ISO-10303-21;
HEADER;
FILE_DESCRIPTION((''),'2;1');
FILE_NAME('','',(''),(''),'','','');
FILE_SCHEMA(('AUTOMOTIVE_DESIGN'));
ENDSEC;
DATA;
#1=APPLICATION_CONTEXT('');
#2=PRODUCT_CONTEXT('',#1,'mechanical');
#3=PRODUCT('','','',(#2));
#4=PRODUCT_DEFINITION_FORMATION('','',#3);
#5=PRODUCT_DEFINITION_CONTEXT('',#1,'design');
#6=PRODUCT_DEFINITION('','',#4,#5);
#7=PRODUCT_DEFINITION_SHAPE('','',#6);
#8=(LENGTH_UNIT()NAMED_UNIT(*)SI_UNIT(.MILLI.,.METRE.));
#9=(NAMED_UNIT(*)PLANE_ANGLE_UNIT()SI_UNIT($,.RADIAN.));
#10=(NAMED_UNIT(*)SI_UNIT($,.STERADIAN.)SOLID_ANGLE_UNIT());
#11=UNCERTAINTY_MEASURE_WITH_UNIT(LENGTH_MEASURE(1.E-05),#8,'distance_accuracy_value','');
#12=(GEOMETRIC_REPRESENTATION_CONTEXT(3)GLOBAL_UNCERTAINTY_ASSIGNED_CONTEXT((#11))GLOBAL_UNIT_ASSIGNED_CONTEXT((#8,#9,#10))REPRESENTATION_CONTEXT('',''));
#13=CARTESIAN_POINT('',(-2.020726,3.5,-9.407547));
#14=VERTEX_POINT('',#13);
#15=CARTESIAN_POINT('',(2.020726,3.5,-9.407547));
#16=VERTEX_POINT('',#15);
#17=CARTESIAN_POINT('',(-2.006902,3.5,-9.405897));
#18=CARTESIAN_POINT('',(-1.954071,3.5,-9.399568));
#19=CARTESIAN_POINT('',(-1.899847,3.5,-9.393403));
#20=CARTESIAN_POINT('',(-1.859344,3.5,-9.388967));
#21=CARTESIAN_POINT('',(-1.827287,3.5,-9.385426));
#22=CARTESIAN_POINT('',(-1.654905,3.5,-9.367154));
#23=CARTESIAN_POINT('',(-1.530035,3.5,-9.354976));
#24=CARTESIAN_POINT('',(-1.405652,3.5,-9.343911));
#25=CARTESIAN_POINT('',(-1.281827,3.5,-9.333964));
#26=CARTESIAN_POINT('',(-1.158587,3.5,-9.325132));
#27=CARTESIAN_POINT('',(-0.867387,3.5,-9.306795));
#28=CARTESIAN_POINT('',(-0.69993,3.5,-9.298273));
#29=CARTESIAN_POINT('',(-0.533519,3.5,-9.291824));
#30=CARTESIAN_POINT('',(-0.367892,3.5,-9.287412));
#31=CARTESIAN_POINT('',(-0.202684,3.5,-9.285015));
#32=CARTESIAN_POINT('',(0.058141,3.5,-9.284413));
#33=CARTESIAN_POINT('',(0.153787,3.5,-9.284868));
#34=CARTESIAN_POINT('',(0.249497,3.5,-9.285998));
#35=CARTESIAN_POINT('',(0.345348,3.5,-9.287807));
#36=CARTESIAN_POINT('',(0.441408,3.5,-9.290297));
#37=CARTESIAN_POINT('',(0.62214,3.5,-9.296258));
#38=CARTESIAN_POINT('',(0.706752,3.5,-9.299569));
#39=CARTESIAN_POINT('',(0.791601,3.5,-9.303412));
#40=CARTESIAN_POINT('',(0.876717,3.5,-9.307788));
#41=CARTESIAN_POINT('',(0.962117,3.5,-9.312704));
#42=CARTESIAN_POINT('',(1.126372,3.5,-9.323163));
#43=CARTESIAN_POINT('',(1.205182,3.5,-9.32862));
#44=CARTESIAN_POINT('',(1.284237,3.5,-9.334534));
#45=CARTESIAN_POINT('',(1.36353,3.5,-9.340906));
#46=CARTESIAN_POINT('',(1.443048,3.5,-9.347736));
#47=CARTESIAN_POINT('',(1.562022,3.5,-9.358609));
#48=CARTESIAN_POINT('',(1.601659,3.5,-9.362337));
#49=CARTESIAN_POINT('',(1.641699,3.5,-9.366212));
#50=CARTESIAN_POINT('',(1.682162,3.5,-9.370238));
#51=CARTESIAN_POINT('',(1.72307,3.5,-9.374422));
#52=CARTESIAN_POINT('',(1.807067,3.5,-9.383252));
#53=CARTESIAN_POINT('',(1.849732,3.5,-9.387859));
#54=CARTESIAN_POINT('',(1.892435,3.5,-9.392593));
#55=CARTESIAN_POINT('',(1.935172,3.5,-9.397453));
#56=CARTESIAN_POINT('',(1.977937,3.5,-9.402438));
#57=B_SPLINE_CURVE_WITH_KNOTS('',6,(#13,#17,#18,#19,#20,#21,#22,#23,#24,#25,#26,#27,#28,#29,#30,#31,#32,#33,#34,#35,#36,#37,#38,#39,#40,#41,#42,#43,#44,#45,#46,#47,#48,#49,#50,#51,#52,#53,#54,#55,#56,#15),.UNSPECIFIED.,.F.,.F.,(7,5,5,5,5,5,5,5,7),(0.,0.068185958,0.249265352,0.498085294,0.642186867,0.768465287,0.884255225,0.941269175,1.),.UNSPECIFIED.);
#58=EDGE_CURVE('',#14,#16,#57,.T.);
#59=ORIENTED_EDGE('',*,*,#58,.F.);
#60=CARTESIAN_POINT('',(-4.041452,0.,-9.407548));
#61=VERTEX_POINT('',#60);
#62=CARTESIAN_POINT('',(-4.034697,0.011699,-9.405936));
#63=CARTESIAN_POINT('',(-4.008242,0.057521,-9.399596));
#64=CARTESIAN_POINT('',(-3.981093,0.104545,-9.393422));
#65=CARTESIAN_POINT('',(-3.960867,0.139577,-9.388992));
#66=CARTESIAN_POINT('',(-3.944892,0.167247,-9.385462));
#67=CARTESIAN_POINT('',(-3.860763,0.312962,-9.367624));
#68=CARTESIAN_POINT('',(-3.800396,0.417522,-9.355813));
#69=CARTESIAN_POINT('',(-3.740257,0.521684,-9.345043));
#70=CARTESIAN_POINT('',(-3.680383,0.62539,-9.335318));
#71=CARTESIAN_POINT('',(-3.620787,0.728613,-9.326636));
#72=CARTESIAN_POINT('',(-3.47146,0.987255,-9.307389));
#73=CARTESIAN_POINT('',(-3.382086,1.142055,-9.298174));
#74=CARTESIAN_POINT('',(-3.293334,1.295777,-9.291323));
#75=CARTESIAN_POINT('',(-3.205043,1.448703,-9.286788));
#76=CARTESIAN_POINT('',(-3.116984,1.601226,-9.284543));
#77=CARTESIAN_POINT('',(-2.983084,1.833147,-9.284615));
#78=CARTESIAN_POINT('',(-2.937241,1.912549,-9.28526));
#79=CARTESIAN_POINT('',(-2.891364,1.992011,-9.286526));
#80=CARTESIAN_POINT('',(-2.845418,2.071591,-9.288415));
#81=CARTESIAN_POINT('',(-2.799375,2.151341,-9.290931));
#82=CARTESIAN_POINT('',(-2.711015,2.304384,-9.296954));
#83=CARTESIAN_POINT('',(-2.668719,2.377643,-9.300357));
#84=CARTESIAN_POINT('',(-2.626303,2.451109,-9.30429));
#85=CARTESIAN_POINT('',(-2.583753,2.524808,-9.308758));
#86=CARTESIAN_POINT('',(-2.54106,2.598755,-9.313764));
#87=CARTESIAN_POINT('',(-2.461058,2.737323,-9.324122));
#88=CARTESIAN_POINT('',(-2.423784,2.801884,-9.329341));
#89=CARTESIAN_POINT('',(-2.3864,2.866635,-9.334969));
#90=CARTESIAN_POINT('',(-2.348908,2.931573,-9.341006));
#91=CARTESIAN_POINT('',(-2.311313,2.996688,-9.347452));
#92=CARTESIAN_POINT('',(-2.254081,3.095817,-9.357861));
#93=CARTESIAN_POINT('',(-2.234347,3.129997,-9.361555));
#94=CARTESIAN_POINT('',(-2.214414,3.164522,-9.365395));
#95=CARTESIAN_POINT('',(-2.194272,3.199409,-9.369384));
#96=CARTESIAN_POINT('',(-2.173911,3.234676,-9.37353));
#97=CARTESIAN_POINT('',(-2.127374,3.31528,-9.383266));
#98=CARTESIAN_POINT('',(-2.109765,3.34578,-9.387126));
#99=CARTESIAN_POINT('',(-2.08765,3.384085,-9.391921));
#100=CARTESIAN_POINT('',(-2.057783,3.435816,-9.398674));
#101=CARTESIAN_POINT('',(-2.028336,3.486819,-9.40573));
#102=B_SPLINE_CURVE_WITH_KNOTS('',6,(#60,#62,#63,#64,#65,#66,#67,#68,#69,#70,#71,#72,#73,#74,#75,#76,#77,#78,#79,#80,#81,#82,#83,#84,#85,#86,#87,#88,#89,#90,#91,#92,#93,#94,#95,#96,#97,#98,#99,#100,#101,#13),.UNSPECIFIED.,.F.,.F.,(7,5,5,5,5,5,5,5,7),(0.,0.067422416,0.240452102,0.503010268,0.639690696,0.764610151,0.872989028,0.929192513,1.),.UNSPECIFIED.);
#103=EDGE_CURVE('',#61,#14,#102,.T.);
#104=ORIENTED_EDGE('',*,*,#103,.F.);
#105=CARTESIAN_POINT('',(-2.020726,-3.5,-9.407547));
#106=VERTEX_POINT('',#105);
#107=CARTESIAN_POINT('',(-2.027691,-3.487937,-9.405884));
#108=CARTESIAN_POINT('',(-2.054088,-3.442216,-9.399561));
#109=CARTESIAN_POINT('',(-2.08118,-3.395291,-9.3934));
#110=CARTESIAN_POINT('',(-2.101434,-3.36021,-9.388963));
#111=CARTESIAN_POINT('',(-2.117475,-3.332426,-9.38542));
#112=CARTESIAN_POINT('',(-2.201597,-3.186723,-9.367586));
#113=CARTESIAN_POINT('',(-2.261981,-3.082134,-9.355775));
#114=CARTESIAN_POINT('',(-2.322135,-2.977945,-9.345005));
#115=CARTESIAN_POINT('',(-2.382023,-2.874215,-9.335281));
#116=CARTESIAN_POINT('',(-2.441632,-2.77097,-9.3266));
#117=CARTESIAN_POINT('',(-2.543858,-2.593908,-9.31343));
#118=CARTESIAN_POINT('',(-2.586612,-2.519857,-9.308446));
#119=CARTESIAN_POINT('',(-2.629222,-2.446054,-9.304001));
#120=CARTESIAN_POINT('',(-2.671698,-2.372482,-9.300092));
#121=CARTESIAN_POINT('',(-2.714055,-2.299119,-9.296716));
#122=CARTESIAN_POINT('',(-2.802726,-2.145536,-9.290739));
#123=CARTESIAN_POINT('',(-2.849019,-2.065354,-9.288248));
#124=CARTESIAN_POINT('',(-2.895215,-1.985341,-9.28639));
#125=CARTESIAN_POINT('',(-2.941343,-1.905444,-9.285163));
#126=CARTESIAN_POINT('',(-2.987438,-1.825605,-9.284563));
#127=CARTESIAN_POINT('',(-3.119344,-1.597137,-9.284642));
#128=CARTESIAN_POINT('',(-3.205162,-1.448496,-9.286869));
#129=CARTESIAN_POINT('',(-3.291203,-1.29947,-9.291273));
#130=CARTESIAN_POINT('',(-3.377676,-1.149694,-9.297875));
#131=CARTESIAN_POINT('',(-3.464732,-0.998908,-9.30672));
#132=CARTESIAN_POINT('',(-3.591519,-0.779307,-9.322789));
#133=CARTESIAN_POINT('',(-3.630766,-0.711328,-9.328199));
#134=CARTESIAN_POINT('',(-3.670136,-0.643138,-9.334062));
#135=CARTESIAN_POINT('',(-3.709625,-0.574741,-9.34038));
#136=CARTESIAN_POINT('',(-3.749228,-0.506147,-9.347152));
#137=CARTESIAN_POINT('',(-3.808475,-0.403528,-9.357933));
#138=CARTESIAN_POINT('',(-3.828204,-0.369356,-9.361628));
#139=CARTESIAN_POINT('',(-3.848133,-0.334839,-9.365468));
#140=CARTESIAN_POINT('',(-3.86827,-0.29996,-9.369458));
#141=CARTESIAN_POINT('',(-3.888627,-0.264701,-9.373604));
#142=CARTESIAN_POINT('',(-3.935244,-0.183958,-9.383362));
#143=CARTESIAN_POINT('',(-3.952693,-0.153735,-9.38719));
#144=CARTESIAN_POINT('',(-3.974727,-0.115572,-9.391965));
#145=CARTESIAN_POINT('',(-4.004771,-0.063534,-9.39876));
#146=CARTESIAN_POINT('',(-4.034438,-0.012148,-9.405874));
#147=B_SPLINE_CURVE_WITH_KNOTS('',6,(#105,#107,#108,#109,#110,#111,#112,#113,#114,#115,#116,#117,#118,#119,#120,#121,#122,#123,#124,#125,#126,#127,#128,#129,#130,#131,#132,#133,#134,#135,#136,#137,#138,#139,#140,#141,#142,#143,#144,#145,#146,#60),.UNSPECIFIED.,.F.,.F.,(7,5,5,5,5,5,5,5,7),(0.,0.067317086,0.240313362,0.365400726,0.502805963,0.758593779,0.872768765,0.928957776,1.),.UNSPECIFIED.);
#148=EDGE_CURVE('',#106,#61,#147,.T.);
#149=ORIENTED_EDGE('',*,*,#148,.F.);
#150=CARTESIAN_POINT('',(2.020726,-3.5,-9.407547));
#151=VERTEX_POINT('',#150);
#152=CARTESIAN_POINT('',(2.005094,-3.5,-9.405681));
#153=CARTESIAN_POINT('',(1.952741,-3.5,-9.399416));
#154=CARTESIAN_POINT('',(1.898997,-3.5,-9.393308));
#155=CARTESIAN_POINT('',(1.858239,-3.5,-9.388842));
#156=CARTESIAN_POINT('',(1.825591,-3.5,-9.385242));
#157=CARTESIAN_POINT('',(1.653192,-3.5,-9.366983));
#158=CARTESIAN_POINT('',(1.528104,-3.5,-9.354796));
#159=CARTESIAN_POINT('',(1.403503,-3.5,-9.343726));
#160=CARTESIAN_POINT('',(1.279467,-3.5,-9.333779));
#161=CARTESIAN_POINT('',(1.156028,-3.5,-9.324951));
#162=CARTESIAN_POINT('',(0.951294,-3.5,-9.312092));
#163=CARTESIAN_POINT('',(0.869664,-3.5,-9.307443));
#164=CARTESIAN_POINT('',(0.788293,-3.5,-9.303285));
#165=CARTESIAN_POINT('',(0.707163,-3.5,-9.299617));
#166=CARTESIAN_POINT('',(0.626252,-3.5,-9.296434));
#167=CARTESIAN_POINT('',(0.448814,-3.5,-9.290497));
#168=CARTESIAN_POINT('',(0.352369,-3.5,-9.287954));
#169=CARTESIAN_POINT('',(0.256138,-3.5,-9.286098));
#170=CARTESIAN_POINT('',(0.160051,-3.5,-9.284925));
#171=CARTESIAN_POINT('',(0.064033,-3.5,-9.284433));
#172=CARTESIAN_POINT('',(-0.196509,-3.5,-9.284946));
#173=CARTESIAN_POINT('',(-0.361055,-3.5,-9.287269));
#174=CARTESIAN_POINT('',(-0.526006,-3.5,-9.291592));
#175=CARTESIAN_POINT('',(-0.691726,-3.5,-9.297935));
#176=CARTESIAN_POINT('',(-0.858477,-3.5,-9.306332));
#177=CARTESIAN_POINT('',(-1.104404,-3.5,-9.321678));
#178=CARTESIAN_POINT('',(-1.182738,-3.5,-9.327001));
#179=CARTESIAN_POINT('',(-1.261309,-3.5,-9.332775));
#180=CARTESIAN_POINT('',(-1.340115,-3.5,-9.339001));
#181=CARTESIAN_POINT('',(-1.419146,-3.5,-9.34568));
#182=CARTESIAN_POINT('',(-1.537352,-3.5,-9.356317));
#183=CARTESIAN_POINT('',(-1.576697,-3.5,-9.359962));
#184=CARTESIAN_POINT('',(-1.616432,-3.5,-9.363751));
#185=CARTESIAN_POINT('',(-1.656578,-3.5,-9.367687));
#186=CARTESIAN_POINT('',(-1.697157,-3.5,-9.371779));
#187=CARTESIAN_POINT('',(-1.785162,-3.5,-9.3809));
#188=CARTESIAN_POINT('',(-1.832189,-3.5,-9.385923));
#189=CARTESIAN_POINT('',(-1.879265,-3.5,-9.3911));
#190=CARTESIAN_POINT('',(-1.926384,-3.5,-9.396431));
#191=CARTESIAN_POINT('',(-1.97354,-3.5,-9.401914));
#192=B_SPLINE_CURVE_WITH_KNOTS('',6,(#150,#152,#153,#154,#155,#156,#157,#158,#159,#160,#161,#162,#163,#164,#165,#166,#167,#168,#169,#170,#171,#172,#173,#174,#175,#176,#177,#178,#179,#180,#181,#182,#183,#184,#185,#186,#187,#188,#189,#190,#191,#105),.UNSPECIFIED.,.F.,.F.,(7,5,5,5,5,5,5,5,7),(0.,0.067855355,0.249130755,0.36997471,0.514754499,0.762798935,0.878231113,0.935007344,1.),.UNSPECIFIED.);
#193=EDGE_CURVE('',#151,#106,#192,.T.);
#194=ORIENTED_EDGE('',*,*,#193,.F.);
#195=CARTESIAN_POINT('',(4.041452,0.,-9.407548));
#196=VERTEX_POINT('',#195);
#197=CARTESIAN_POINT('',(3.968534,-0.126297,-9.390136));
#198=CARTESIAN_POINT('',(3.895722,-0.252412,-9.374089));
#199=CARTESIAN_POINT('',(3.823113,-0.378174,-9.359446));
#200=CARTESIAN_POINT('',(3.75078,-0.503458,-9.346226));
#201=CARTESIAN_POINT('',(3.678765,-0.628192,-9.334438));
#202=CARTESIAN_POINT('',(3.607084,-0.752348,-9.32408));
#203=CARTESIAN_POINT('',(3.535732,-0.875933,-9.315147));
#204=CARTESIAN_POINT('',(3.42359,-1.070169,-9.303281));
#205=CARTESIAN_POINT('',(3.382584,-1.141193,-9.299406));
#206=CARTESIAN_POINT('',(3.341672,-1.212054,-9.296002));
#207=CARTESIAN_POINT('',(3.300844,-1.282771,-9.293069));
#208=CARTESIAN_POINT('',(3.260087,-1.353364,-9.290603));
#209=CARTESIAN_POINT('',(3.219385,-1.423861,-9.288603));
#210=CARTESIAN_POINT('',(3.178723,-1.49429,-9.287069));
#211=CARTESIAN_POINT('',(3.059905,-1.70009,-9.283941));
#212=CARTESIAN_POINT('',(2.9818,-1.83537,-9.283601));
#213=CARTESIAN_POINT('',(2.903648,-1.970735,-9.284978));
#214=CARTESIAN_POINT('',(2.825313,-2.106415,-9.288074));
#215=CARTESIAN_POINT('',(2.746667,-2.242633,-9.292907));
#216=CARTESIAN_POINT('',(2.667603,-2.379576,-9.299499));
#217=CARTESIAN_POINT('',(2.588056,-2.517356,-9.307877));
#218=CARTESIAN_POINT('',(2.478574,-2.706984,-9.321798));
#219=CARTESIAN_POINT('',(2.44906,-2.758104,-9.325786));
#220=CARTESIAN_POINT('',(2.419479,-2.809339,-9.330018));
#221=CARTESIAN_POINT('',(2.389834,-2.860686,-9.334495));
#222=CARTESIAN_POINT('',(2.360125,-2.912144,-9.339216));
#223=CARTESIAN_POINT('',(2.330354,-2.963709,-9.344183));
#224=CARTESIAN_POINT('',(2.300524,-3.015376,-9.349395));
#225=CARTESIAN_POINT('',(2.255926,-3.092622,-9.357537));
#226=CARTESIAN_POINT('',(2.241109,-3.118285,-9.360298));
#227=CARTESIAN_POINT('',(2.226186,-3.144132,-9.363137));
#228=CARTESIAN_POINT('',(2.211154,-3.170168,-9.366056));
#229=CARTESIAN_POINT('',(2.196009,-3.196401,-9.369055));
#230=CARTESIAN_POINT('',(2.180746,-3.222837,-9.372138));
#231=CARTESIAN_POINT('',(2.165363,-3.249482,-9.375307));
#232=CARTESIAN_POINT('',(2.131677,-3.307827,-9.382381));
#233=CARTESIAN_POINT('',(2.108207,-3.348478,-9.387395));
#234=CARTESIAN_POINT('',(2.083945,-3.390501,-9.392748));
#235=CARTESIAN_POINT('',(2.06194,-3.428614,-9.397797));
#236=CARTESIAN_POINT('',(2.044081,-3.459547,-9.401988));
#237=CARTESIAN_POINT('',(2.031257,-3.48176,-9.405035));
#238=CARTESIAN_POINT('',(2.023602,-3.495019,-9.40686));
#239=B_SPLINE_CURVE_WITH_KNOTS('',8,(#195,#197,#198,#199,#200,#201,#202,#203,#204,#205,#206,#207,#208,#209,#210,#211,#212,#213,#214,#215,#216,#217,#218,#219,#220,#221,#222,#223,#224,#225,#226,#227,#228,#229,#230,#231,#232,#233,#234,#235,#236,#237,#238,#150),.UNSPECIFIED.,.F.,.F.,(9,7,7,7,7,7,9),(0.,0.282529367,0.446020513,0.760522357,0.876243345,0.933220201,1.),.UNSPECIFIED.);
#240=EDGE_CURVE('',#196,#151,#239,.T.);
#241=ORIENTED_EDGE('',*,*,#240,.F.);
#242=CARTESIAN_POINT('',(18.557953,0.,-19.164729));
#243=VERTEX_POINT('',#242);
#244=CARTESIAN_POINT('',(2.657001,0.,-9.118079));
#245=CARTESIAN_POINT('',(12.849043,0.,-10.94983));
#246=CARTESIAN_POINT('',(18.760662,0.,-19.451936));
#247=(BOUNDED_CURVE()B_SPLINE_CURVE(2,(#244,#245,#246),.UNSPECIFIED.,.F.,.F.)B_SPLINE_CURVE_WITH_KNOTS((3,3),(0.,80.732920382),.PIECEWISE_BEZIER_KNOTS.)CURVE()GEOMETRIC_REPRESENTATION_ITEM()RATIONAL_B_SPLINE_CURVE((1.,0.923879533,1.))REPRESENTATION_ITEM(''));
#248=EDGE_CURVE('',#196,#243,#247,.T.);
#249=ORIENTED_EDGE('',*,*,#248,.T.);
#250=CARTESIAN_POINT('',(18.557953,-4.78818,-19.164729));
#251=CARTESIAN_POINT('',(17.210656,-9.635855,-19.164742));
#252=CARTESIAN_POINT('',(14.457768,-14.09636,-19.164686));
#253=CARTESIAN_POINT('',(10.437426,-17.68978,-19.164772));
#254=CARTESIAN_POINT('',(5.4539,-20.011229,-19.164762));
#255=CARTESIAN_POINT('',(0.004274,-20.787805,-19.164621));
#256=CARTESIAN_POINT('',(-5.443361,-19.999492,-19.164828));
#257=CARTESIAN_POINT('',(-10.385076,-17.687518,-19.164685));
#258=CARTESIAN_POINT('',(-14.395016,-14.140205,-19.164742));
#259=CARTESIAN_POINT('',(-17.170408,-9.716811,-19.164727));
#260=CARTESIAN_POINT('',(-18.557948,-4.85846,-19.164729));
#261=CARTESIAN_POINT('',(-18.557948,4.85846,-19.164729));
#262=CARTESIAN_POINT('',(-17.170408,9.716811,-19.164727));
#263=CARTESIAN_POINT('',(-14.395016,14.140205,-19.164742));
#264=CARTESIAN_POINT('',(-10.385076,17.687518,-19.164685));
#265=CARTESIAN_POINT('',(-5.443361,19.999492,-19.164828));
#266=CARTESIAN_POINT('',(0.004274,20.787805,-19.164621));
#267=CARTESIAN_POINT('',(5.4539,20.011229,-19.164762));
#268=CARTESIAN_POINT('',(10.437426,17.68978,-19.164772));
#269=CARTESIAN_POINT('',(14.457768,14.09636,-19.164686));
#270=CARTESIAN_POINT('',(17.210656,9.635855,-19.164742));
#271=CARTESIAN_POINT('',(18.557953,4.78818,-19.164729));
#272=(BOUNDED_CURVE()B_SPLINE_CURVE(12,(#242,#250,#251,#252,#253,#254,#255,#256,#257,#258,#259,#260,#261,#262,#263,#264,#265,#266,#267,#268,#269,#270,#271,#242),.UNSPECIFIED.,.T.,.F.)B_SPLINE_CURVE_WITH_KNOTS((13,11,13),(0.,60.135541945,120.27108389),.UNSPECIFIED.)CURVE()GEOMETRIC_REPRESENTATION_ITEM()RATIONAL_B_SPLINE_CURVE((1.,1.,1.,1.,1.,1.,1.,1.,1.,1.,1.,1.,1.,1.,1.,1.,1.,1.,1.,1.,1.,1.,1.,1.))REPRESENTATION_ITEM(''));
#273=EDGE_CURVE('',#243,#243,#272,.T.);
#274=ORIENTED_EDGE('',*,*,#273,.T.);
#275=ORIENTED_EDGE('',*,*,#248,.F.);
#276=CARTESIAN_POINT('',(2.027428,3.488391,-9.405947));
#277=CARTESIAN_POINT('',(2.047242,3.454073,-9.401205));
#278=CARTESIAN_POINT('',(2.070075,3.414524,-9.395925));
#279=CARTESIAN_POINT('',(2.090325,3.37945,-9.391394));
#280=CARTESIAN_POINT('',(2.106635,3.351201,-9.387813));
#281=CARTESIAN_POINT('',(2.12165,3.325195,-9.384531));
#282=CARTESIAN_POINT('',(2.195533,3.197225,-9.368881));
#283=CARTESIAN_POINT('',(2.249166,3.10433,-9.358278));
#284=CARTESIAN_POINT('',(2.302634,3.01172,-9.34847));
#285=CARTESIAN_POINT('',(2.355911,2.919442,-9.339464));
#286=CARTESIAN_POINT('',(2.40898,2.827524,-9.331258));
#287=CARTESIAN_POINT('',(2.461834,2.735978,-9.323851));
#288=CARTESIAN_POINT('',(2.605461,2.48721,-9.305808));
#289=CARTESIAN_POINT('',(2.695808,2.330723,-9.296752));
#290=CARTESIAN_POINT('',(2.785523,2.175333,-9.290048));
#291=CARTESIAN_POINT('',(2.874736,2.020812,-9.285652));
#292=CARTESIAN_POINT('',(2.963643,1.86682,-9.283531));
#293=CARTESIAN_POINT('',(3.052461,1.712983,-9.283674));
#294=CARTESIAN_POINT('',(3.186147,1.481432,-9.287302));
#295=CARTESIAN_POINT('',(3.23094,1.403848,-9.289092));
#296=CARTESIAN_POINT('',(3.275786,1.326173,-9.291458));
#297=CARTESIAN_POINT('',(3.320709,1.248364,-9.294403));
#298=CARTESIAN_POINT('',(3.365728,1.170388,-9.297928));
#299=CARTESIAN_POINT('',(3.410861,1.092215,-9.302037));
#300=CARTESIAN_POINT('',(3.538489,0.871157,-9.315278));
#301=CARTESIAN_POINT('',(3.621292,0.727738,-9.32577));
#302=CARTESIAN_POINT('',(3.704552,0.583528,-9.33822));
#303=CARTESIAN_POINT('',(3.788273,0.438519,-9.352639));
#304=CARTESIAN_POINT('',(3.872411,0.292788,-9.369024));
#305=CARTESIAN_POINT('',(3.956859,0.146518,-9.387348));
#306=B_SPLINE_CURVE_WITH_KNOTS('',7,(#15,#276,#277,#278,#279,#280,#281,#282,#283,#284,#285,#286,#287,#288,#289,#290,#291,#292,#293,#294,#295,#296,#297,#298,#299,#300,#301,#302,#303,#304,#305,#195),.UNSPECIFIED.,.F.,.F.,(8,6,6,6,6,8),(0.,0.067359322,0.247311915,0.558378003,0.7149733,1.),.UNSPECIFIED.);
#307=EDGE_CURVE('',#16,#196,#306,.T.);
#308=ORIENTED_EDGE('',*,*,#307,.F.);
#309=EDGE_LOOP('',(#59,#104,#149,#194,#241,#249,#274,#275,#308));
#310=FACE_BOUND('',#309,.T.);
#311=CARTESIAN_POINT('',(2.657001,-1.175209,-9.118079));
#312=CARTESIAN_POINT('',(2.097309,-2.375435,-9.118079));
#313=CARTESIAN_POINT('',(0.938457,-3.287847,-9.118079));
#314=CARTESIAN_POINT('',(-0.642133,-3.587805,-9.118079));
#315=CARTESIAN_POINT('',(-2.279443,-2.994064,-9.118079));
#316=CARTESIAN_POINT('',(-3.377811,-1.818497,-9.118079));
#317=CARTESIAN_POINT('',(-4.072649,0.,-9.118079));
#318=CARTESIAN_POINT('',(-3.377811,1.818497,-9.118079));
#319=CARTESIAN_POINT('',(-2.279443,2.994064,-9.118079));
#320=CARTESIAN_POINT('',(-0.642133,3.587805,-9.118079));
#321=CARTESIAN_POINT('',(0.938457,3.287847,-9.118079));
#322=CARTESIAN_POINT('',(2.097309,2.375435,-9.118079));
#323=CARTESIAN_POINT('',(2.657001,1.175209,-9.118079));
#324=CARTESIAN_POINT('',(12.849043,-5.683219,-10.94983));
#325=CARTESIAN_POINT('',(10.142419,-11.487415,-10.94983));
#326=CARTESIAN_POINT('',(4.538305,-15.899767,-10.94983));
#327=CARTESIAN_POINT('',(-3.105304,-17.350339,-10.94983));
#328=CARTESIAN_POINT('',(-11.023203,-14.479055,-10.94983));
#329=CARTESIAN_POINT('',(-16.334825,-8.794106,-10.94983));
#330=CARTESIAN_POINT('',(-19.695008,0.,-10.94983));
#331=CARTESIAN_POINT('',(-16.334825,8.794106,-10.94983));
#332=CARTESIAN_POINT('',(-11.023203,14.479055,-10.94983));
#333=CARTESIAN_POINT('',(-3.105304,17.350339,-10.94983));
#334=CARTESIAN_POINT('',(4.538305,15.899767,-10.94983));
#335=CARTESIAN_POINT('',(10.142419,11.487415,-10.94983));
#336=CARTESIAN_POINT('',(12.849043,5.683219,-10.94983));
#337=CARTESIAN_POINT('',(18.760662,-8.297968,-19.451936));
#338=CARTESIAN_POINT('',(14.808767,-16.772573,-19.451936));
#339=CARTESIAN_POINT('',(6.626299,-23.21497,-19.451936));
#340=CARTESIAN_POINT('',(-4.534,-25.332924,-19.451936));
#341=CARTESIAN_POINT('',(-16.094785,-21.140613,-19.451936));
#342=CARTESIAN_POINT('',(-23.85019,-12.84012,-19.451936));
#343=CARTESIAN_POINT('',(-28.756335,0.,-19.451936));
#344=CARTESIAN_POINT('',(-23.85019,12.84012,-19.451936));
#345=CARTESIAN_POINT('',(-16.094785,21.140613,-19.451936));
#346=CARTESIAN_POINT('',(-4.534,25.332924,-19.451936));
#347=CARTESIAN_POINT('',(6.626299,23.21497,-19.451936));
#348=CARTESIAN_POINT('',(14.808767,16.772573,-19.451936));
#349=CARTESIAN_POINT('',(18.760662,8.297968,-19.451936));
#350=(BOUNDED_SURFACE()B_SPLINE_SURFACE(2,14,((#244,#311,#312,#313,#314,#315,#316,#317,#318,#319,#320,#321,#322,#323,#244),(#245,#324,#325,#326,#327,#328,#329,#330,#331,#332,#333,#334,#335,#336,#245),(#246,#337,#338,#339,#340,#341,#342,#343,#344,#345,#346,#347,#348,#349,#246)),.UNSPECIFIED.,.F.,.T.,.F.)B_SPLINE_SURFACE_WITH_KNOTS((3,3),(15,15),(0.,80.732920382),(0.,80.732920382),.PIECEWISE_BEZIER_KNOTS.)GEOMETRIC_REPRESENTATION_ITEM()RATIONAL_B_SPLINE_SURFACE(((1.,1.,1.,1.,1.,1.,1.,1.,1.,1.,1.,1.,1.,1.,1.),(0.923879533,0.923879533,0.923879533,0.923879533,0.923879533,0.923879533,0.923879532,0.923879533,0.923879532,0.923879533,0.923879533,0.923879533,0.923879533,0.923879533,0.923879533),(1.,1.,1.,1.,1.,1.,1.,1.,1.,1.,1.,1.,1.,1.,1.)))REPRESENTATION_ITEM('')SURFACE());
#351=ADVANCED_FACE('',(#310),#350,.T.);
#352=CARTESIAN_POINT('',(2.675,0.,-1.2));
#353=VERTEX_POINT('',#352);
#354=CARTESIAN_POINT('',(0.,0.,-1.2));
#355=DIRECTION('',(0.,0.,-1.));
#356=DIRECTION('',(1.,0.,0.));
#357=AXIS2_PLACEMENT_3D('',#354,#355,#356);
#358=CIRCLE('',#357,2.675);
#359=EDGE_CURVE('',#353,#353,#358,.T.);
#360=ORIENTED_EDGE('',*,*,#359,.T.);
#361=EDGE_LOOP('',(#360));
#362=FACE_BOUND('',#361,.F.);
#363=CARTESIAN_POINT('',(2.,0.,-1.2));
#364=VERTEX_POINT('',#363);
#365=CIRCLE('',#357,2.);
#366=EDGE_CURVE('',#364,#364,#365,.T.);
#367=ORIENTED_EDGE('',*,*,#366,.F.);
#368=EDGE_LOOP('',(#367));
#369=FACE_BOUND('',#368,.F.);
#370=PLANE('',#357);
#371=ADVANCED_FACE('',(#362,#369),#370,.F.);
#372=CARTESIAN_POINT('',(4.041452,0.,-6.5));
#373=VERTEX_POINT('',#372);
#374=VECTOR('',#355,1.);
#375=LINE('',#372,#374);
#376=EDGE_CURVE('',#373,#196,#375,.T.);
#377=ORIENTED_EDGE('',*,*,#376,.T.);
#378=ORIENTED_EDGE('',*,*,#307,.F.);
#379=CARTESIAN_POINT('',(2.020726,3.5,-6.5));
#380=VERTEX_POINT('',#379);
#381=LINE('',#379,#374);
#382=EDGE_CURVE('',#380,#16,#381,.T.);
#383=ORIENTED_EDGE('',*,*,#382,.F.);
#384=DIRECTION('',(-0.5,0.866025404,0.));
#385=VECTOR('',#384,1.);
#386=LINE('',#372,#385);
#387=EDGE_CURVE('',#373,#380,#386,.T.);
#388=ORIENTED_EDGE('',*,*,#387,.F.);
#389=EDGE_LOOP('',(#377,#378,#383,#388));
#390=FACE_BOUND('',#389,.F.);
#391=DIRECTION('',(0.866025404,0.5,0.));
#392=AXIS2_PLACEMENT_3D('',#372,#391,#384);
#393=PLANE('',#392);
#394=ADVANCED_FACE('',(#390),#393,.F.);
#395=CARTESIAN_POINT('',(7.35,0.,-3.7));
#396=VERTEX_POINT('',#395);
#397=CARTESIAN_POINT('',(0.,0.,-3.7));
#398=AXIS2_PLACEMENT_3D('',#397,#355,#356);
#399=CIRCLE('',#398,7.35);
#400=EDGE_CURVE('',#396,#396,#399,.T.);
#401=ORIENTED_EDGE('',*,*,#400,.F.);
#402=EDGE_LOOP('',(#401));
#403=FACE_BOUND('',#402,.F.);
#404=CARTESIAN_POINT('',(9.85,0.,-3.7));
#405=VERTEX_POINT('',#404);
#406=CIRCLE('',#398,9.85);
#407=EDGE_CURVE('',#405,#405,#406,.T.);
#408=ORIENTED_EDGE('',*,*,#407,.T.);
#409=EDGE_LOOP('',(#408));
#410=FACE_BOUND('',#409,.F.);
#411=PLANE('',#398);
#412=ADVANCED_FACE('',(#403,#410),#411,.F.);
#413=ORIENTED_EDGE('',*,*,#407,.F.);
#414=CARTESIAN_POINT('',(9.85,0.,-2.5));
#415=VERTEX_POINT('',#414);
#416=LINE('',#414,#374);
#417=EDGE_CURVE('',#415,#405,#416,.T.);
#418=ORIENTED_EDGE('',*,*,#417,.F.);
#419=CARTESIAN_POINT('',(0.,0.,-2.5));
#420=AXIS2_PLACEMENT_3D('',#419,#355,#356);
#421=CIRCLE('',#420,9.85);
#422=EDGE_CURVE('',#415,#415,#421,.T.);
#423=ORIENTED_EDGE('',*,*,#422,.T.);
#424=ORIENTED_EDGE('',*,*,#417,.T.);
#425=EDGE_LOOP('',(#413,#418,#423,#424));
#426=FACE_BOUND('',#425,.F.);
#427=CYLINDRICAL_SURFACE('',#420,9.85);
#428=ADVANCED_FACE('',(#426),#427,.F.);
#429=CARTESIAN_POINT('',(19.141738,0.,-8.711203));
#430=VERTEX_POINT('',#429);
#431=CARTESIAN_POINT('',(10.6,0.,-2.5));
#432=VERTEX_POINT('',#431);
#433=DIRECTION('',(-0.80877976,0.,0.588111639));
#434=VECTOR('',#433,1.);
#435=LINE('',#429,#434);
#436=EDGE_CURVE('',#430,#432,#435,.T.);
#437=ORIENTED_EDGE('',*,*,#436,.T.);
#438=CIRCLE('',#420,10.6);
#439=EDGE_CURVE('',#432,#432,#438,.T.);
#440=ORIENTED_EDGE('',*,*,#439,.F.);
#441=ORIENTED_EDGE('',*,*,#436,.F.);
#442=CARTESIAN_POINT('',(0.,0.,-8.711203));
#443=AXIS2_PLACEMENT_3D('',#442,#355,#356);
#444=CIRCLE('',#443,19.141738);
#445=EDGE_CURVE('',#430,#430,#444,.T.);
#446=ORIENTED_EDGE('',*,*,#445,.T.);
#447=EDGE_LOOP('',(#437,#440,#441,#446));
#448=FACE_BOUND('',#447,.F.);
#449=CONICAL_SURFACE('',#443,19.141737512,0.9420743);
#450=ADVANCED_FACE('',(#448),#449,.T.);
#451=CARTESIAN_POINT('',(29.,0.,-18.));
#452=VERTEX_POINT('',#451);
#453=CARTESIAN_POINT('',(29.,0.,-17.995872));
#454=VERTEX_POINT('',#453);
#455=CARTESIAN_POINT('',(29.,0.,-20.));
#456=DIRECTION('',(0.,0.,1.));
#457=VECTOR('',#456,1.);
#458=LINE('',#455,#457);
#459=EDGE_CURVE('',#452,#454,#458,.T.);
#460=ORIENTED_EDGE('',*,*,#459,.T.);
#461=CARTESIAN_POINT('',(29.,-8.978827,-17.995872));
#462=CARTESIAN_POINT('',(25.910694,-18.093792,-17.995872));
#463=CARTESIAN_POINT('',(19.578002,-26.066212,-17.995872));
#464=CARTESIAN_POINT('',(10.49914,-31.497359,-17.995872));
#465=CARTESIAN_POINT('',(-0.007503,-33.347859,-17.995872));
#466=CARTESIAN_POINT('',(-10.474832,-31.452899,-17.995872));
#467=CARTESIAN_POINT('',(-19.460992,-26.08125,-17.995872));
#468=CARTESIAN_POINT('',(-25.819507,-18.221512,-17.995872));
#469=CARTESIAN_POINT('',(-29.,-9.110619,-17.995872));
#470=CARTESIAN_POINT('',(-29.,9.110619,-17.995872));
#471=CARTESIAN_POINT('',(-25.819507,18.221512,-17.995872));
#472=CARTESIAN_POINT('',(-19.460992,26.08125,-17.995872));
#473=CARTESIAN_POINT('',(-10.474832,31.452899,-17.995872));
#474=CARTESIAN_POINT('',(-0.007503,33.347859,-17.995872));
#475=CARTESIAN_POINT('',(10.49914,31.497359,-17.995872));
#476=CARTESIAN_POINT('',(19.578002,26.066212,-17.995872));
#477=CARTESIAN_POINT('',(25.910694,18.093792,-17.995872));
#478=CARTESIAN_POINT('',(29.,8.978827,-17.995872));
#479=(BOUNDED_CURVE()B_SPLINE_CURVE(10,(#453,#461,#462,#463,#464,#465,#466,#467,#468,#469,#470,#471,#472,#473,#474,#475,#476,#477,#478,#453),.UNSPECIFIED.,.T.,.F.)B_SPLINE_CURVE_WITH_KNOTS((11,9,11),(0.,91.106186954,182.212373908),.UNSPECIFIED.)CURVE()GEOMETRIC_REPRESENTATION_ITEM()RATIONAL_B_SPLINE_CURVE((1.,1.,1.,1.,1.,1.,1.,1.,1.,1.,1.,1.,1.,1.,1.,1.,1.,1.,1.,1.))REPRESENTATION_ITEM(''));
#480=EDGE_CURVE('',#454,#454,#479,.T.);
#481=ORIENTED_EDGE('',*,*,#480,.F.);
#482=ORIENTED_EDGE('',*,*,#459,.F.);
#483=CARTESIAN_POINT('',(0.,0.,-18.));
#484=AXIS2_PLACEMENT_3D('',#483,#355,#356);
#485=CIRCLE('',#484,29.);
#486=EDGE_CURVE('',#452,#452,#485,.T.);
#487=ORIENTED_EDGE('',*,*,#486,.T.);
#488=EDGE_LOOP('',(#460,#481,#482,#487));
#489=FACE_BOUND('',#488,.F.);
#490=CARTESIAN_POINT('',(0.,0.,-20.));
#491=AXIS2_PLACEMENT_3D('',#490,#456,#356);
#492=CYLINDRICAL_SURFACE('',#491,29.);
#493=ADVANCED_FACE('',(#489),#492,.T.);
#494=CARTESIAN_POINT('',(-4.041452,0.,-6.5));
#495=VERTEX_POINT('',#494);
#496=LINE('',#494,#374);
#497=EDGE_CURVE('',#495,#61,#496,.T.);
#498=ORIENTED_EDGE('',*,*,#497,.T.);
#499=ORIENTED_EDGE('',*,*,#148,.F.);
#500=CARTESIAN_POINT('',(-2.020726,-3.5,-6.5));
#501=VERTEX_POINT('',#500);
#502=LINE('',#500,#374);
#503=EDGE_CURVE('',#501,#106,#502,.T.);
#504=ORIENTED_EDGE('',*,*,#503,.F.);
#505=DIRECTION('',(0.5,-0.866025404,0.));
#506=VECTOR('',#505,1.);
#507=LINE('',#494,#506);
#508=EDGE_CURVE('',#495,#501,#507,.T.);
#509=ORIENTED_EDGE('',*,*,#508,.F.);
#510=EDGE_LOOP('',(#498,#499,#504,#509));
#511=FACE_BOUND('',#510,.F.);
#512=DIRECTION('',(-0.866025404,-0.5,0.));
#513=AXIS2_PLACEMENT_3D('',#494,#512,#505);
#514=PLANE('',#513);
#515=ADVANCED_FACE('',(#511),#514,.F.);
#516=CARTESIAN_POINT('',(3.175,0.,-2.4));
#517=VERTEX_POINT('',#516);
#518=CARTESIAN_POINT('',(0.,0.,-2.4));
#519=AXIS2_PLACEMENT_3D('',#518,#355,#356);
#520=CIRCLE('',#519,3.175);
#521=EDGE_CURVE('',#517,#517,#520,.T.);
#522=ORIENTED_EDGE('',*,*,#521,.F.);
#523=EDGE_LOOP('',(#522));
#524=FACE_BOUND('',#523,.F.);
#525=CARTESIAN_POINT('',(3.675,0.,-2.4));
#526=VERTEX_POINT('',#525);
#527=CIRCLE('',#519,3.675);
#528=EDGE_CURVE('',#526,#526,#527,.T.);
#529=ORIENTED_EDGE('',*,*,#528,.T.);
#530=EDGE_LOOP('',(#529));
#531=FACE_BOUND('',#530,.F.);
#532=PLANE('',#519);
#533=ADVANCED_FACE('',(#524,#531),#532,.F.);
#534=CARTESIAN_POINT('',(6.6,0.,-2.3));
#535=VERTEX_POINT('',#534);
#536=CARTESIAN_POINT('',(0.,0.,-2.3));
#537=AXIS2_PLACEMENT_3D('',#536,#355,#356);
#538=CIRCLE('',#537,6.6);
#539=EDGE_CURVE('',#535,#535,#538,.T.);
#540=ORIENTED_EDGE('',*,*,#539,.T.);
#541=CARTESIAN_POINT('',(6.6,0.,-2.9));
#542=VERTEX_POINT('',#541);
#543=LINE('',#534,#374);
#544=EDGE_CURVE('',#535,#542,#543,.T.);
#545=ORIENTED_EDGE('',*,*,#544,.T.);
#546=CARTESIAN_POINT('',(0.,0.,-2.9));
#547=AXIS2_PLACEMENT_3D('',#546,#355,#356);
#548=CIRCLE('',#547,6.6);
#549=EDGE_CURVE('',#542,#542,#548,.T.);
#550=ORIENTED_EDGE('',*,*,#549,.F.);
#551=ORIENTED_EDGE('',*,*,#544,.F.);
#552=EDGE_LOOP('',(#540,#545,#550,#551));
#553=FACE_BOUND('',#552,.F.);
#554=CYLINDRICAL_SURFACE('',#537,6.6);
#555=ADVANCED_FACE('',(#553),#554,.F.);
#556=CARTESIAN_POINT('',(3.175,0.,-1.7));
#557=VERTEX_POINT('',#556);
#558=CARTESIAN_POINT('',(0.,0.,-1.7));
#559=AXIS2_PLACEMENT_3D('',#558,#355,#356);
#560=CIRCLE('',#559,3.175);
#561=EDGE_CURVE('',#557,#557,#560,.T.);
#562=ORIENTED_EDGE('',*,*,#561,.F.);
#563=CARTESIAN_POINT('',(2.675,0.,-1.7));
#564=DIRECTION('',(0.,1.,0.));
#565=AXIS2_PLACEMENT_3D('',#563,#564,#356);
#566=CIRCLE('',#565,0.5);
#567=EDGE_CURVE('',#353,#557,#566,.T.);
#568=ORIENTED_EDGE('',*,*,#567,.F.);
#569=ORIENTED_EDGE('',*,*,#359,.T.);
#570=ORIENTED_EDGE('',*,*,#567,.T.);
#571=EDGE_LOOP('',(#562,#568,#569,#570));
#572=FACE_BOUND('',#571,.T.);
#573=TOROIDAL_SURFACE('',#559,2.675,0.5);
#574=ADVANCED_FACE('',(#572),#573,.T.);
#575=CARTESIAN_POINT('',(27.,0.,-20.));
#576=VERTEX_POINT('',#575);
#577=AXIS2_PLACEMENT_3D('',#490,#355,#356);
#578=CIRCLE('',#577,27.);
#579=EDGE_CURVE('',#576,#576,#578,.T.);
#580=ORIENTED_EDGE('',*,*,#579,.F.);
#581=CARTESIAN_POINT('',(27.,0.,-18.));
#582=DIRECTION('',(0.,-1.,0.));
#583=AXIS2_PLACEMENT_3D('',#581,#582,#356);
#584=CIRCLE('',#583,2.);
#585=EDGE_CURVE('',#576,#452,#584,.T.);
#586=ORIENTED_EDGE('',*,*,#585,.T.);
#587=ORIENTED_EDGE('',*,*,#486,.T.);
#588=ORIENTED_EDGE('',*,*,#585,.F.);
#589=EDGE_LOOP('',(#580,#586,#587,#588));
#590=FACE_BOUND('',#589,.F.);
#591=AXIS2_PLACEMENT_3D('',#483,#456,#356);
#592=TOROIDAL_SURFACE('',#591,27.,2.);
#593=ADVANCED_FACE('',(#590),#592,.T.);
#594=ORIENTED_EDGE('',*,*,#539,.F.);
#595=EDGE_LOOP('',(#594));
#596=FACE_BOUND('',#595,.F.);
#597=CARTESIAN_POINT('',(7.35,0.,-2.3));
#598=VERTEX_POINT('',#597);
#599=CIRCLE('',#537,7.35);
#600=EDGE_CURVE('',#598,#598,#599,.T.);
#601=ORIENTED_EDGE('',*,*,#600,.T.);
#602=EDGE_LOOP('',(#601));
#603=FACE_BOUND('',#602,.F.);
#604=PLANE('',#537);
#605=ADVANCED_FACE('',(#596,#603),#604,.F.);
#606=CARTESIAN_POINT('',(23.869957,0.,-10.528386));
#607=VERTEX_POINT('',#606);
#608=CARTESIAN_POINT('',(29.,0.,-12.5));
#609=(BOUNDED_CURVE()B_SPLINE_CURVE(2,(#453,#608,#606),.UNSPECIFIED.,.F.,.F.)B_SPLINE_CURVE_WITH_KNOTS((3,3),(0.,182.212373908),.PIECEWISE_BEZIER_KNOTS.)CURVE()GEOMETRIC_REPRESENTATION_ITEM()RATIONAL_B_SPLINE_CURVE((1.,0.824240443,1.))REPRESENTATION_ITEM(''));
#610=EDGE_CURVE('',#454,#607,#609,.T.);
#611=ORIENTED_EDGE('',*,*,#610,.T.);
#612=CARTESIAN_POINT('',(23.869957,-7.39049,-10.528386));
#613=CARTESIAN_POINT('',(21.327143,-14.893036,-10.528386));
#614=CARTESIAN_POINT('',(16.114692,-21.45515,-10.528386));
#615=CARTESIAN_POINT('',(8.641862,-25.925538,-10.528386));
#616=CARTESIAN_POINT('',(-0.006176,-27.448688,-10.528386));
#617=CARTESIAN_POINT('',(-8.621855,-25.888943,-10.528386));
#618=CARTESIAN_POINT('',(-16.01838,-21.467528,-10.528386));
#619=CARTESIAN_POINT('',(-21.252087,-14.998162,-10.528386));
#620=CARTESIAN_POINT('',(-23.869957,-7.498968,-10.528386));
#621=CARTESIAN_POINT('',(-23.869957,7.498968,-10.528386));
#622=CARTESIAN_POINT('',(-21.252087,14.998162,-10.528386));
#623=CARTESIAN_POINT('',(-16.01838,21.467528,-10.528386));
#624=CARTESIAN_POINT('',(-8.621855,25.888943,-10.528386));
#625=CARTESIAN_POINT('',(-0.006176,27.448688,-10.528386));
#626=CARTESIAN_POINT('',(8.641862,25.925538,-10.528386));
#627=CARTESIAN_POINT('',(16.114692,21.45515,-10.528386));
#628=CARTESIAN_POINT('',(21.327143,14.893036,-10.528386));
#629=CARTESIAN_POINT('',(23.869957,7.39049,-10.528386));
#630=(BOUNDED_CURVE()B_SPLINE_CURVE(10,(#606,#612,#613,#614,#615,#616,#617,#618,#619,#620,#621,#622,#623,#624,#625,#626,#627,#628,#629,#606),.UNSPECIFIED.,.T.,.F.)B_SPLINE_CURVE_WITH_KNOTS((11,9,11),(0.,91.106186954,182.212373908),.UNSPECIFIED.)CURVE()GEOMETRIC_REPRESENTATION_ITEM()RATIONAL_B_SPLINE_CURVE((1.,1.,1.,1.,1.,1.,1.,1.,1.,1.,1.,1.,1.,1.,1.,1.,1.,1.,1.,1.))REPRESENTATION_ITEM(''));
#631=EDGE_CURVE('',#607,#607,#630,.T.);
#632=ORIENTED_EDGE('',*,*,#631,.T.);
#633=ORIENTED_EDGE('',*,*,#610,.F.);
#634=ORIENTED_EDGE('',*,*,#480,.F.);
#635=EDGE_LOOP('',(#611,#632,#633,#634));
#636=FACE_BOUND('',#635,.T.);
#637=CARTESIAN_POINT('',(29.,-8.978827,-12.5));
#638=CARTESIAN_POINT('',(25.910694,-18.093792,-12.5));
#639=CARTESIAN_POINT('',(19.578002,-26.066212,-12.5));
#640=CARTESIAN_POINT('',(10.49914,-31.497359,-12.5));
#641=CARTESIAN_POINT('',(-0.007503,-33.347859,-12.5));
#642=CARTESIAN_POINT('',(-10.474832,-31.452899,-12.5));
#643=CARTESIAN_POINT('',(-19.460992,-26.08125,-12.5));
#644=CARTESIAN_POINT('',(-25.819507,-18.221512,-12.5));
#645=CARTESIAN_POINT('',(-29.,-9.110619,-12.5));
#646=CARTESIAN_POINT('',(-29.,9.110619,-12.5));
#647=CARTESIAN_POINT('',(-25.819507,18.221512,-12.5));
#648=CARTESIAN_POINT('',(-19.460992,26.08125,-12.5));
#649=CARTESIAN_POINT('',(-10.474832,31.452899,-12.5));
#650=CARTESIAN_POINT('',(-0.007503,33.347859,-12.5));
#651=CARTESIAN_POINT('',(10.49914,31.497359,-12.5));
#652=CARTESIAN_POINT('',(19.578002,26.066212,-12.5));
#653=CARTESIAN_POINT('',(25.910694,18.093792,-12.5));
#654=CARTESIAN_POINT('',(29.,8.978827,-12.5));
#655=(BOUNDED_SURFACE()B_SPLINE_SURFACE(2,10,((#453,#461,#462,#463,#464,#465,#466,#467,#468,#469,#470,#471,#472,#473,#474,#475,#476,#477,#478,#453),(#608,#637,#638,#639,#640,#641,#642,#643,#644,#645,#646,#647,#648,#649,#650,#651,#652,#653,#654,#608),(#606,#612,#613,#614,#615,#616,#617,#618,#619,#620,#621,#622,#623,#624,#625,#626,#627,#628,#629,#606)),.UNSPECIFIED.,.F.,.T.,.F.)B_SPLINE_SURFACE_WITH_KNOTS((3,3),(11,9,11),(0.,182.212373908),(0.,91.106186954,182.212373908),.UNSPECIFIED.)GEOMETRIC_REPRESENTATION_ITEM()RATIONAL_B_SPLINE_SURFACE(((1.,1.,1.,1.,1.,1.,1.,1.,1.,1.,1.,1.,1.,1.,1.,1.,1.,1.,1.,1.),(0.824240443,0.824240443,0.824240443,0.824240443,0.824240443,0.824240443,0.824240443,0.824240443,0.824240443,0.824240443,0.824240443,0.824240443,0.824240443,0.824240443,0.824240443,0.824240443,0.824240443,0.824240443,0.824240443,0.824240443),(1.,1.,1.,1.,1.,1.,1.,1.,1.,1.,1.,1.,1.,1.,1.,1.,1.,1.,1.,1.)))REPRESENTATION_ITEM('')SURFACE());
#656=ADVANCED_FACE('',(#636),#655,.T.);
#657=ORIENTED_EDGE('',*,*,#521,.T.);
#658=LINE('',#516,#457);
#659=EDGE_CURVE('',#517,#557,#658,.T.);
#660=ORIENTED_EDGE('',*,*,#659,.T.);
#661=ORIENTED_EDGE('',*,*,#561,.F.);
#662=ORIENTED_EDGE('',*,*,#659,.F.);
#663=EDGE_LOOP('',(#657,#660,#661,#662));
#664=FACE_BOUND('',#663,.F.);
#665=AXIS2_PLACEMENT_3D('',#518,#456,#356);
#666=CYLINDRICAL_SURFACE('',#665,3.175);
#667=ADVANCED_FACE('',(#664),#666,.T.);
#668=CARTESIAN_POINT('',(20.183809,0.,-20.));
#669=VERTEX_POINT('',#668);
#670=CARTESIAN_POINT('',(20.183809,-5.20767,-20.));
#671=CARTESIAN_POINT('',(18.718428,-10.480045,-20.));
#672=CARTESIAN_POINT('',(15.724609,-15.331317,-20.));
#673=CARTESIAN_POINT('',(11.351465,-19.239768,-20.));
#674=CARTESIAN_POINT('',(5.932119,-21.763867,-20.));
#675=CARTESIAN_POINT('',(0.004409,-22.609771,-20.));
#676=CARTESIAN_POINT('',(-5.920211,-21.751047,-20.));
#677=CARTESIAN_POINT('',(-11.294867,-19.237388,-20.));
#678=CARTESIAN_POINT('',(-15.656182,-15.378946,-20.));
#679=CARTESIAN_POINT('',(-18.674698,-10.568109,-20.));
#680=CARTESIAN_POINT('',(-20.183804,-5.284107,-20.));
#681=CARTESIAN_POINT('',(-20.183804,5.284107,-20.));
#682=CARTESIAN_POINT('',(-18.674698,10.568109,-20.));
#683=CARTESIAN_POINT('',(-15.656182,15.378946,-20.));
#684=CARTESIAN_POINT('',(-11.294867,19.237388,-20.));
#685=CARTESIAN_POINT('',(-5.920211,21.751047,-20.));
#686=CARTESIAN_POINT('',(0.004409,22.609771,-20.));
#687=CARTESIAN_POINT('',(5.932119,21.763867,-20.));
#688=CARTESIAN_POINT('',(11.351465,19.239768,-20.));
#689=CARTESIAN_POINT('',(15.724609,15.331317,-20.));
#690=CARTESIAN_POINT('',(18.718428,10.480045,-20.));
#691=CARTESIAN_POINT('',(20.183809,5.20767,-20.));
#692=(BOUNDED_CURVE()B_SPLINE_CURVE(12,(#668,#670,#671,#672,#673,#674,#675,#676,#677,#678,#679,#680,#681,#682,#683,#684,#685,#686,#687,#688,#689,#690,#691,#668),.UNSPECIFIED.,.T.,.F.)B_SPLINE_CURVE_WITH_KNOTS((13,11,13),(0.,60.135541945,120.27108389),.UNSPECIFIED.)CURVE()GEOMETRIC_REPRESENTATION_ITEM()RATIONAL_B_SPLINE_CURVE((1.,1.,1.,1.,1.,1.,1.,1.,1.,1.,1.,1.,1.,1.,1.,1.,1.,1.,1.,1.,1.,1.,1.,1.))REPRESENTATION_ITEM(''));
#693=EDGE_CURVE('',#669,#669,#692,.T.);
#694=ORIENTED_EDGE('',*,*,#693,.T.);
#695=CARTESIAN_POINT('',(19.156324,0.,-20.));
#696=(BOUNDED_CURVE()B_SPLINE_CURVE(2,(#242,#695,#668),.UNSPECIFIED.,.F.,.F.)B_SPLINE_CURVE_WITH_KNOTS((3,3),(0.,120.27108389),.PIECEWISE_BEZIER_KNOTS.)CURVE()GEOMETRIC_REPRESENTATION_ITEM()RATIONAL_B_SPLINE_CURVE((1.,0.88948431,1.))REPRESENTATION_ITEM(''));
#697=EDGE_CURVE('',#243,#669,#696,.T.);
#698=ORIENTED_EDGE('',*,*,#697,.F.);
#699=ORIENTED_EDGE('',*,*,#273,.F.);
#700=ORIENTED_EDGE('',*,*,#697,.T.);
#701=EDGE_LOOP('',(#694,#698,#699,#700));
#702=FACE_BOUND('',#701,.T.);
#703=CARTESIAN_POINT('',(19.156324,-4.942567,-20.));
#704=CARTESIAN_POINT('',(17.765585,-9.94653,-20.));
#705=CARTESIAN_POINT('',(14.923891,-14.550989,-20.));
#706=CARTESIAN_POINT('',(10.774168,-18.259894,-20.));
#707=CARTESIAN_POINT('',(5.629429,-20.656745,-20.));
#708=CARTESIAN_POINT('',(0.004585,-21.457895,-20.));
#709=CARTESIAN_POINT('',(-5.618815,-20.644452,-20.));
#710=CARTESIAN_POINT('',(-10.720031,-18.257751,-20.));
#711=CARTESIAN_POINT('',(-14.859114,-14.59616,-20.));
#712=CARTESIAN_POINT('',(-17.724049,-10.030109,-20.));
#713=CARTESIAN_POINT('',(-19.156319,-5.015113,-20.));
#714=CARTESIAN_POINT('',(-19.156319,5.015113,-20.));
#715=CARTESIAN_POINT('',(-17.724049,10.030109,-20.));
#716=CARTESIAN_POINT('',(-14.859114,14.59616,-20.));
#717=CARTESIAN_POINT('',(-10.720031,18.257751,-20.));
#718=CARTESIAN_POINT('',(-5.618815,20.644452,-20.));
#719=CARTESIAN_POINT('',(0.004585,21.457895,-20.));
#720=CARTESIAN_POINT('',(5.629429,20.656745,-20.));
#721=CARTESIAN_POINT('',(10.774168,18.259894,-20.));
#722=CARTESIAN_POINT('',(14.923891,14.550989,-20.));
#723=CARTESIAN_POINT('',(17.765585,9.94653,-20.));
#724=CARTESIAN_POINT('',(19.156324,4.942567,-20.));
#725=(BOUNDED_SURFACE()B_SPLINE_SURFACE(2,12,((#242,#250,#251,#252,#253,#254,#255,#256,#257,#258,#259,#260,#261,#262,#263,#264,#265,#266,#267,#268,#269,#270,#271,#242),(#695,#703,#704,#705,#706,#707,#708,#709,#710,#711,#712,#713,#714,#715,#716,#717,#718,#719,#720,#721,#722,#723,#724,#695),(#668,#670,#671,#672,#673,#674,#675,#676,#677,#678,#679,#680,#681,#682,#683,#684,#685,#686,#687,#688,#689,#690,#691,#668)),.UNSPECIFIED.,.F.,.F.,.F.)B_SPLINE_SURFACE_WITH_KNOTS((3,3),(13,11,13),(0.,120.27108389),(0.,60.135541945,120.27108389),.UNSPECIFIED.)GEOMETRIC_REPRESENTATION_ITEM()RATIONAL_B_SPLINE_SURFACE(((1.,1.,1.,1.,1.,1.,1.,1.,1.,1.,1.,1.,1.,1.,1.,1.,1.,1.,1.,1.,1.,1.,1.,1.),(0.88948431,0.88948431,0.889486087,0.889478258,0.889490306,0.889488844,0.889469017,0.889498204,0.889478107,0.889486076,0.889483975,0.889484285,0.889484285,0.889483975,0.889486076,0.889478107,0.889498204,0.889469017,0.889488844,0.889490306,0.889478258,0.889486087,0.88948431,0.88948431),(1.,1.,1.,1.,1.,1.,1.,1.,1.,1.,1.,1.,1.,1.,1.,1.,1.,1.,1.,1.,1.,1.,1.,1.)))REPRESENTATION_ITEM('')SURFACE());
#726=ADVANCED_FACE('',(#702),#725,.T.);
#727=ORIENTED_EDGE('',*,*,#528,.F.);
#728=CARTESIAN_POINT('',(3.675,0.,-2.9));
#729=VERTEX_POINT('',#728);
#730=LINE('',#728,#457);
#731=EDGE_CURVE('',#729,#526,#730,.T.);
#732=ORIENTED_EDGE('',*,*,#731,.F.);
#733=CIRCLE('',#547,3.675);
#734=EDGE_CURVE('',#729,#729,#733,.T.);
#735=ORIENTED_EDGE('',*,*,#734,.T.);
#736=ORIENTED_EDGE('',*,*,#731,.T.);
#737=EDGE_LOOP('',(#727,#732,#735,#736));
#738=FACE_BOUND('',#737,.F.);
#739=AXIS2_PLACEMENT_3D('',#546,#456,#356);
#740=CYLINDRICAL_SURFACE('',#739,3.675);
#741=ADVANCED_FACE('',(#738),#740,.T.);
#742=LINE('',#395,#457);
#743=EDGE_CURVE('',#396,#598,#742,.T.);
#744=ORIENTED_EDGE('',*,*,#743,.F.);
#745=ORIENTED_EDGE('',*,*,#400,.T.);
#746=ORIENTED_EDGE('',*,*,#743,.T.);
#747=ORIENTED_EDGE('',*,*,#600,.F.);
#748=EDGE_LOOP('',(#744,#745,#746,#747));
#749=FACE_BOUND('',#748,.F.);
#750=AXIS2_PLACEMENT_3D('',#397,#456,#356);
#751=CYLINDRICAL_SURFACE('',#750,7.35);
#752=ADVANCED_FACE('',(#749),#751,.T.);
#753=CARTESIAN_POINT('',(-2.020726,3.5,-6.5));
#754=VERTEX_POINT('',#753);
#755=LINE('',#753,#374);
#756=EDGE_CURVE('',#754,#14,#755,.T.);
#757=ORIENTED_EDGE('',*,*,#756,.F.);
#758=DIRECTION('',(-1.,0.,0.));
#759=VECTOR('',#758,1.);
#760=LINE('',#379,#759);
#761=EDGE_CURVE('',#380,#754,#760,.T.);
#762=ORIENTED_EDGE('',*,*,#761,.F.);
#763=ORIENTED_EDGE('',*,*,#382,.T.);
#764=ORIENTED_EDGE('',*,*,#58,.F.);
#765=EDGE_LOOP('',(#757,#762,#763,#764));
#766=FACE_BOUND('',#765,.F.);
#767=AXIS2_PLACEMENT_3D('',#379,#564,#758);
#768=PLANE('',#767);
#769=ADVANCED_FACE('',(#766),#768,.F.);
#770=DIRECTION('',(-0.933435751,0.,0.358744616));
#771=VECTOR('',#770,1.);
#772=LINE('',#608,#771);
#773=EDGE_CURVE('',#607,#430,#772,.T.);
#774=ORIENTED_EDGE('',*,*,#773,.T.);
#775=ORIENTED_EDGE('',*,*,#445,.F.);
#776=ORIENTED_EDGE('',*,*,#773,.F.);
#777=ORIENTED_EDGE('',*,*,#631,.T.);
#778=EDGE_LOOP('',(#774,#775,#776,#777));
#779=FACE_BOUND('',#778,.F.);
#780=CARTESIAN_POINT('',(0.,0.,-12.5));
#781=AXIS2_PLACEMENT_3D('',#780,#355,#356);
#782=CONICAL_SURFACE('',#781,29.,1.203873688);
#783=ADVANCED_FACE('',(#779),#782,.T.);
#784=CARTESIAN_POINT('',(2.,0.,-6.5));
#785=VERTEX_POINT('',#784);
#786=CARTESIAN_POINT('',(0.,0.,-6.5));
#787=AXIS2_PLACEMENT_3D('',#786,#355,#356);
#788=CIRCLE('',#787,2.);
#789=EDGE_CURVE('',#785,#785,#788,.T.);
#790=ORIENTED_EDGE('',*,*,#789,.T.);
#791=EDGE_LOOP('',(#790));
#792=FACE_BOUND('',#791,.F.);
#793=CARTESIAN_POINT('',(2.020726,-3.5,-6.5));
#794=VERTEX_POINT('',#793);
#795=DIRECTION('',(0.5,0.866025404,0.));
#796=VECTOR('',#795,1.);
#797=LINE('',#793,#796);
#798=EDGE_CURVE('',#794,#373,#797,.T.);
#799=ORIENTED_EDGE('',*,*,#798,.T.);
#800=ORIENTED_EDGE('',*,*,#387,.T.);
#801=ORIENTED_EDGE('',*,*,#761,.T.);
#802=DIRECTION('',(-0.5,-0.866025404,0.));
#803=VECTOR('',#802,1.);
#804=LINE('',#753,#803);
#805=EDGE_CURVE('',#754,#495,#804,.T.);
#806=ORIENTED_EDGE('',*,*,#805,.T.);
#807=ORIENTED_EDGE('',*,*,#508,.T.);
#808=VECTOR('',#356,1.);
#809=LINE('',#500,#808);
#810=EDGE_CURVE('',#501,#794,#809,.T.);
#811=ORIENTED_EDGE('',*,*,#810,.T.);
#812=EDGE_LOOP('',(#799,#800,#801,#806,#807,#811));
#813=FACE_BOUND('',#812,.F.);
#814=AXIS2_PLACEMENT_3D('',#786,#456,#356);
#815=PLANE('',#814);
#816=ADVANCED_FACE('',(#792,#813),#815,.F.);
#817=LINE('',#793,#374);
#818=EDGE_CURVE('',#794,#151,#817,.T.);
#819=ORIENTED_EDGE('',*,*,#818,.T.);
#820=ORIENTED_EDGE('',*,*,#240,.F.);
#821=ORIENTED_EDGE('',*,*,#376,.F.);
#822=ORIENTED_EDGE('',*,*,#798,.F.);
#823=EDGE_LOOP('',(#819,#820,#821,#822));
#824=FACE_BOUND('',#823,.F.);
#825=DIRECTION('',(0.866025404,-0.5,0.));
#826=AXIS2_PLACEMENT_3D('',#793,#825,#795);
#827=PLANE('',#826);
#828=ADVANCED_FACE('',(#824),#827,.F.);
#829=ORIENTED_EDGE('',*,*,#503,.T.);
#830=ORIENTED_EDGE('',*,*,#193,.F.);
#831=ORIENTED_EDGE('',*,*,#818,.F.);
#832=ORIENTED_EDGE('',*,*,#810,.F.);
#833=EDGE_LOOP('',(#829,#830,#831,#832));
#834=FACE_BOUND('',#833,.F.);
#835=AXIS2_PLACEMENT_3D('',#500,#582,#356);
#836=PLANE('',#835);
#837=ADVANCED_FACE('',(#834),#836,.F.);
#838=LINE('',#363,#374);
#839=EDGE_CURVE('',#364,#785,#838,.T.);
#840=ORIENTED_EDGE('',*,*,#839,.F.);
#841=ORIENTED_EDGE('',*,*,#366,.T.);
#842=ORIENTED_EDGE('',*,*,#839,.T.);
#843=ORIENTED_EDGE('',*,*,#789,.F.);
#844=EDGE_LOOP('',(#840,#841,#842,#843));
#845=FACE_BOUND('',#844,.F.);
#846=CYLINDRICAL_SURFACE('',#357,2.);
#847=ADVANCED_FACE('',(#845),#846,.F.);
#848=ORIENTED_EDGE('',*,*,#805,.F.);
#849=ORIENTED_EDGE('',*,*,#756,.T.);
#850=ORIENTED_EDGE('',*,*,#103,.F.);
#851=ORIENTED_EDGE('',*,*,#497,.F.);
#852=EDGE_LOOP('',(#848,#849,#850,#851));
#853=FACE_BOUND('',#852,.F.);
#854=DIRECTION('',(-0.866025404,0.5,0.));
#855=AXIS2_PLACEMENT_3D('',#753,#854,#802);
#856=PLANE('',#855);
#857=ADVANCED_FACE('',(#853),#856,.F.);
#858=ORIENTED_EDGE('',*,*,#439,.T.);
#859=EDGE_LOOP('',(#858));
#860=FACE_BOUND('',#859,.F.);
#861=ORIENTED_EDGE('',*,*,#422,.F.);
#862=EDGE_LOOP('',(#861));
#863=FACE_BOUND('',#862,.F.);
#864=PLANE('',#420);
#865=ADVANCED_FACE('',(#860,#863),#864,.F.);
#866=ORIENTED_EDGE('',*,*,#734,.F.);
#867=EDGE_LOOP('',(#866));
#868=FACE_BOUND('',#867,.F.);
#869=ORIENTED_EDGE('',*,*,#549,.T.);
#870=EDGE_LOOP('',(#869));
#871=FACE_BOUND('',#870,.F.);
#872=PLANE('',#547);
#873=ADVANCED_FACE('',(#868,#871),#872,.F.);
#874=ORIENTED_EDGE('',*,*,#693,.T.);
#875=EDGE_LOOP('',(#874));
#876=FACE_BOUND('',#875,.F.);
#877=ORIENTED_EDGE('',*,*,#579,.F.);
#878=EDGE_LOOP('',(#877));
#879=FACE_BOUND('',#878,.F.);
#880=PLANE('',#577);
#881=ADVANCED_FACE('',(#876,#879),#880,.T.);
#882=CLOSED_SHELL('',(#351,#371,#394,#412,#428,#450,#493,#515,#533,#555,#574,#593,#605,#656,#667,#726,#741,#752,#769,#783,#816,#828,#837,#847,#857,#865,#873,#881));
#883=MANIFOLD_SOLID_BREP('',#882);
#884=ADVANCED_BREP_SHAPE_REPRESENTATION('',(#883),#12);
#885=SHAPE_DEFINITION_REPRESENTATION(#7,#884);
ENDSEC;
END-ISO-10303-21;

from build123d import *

# Parameters (mm, degrees)
F2_R     = 25
F3_R     = 8
F4_R     = 0.5
F5_R     = 2
F8_DEPTH = 3.5


# Not quite as in the source:
# - a feature names something its author has since deleted; it is built from what else it names


with BuildPart() as f1:
    # F0 (on Front) → F1 (revolve)
    with BuildSketch(Plane.XZ):
        Polygon((3.175, -1.2), (2, -1.2), (2, -9), (12.8490433491, -10.9498299199), (19.1417375121, -20), (29, -20), (29, -12.5), (19.1417375121, -8.7112029778), (10.6, -2.5), (9.85, -2.5), (9.85, -3.7), (7.35, -3.7), (7.35, -2.3), (6.6, -2.3), (6.6, -2.9), (3.675, -2.9), (3.675, -2.4), (3.175, -2.4), align=None)
    revolve(axis=Axis((0, 0, -7.3547498323), (0, 0, -1)))

    # F2
    f2_edges = [f1.edges().sort_by_distance(p)[0] for p in [
        (-12.849043, 0, -10.94983),
    ]]
    fillet(f2_edges, radius=F2_R)

    # F3
    f3_edges = [f1.edges().sort_by_distance(p)[0] for p in [
        (-29, 0, -12.5),
    ]]
    fillet(f3_edges, radius=F3_R)

    # F4
    f4_edges = [f1.edges().sort_by_distance(p)[0] for p in [
        (-3.175, 0, -1.2),
    ]]
    fillet(f4_edges, radius=F4_R)

    # F5
    f5_edges = [f1.edges().sort_by_distance(p)[0] for p in [
        (-29, 0, -20),
        (-19.141738, 0, -20),
    ]]
    fillet(f5_edges, radius=F5_R)

    # F7 (on offset) → F8 (cut)
    with BuildSketch(Plane.XY.offset(-6.5)):
        Polygon((2.0207259422, -3.5), (4.0414518843, 0), (2.0207259422, 3.5), (-2.0207259422, 3.5), (-4.0414518843, 0), (-2.0207259422, -3.5), align=None)
    extrude(amount=-F8_DEPTH, mode=Mode.SUBTRACT)


solid = f1.part
